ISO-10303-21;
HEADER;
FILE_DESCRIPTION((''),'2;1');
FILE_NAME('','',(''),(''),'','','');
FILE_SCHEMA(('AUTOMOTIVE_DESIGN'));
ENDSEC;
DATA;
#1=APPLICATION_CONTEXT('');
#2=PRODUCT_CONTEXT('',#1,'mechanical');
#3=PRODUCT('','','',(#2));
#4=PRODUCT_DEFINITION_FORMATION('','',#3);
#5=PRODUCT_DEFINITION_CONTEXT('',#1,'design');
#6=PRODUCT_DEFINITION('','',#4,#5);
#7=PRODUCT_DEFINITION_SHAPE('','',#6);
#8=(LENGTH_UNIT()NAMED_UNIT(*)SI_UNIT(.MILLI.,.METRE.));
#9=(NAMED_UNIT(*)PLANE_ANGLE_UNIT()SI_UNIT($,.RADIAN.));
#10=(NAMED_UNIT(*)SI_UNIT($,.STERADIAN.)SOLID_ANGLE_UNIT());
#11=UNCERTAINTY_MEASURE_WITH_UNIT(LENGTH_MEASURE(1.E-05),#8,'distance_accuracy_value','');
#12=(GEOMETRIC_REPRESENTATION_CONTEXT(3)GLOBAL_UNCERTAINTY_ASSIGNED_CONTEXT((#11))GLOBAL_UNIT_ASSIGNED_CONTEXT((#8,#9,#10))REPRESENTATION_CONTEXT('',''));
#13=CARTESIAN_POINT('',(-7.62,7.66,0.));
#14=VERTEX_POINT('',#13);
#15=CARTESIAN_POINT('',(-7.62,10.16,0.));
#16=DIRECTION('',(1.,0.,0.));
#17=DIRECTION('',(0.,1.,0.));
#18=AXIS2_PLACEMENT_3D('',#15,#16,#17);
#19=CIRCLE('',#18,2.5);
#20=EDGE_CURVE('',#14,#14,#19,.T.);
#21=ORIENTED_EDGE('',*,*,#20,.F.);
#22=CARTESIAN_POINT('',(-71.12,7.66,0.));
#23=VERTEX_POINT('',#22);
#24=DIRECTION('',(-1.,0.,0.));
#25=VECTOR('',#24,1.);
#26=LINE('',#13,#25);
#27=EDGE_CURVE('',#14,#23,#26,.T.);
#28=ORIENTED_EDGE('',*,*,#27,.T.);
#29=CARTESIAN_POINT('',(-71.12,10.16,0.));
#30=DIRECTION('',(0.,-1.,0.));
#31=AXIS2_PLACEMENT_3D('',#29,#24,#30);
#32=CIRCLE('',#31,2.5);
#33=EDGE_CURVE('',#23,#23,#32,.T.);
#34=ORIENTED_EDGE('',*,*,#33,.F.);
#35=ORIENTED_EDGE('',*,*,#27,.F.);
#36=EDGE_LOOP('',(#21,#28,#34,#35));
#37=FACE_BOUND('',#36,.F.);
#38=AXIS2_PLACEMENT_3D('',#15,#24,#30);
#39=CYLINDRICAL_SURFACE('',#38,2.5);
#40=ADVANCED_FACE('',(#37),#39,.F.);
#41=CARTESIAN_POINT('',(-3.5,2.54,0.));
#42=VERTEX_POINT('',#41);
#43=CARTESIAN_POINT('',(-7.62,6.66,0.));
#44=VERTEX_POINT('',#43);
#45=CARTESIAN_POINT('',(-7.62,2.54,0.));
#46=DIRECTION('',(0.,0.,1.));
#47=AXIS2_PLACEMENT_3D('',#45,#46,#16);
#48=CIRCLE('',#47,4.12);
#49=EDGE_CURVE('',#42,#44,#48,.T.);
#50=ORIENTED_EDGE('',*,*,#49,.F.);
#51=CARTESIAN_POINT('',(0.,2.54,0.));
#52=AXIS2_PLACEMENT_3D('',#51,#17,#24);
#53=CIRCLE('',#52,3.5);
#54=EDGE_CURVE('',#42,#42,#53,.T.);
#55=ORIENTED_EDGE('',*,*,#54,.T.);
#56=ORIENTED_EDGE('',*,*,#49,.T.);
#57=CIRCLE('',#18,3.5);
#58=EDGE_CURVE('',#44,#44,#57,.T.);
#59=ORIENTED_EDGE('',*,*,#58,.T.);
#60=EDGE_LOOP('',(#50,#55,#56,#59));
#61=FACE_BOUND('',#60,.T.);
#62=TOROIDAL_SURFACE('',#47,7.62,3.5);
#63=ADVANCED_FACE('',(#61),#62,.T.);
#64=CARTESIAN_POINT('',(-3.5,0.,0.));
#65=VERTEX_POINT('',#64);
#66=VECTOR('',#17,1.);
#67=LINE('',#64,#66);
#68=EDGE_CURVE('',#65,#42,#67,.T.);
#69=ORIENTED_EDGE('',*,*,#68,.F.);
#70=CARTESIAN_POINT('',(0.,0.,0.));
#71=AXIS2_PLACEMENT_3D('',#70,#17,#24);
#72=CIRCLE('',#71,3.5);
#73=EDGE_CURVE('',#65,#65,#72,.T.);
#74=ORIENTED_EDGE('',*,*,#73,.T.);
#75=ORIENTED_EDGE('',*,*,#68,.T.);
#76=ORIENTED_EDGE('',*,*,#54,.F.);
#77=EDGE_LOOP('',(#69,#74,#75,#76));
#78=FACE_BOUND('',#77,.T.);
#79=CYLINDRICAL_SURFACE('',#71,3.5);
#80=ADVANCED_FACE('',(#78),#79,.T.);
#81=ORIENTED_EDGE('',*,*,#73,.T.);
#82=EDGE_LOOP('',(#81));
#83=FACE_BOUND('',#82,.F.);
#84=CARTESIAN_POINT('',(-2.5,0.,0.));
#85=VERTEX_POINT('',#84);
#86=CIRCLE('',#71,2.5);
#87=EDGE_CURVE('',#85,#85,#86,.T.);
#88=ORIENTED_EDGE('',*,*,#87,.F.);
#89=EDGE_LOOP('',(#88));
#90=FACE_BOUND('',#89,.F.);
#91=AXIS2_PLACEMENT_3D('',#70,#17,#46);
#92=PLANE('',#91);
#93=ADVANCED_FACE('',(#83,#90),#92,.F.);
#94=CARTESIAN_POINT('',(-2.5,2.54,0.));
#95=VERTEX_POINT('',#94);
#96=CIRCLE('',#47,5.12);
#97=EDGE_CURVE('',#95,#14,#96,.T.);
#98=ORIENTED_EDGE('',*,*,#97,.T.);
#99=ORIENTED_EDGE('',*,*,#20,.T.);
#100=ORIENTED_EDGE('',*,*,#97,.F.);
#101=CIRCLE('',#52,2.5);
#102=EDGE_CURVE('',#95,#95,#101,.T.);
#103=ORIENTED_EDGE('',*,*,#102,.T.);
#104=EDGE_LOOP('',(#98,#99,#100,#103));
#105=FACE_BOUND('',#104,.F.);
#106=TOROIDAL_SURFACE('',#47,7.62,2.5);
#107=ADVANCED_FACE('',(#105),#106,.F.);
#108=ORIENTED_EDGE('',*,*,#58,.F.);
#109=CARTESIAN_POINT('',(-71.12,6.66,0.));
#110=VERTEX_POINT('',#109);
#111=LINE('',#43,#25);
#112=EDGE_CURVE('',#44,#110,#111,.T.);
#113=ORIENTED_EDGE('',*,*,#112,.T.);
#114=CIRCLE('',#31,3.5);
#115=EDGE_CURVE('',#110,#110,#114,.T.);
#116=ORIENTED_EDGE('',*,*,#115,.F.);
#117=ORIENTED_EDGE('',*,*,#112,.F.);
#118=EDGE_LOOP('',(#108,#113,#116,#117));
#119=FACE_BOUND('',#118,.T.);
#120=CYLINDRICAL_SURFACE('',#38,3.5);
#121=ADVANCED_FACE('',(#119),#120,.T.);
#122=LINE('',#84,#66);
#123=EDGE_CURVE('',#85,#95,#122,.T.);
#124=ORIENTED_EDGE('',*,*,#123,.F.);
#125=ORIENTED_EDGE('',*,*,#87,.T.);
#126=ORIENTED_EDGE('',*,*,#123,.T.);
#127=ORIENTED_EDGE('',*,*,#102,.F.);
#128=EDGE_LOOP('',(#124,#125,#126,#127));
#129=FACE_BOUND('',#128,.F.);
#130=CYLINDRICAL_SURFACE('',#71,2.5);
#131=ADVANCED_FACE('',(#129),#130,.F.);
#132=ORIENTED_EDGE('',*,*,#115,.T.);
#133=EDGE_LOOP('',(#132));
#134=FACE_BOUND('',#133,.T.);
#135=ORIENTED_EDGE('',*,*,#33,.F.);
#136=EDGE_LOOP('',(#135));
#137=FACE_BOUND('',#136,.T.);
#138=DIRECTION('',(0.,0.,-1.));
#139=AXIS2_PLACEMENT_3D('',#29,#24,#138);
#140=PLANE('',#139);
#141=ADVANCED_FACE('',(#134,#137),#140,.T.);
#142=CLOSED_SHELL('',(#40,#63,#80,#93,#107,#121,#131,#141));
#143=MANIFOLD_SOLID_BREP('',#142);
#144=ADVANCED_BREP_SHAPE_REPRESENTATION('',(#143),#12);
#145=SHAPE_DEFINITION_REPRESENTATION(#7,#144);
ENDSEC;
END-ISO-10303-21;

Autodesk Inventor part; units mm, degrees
ref_plane "YZ Plane" through (0, 0, 0) normal (1, 0, 0) x (0, 1, 0)
ref_plane "XZ Plane" through (0, 0, 0) normal (0, 1, 0) x (-1, 0, 0)
ref_plane "XY Plane" through (0, 0, 0) normal (0, 0, 1) x (1, 0, 0)
sketch "Sketch1" plane through (0, 0, 0) normal (0, 1, 0) x (-1, 0, 0)
  circle A0 centre (0, 0) radius 2.5
  circle A1 centre (0, 0) radius 3.5
  dimension "PenetrationUpstreamInnerDiameter" = 5
  dimension "PenetrationUpstreamThickness" = 1
sketch "Sketch2" plane through (0, 0, 0) normal (0, 0, 1) x (1, 0, 0)
  line L0 (-7.62, 10.16) -> (-71.12, 10.16)
  line L1 (0, 0) -> (0, 2.54)
  arc A0 (0, 2.54) -> (-7.62, 10.16) centre (-7.62, 2.54) ccw
  dimension "PenetrationUpstreamLength" = 63.5
  dimension "d14" = 90
  dimension "PenetrationUpstreamDistanceFromWallToCentre" = 10.16
  dimension "StraightBit" = 2.54
sweep "Sweep2" add profiles "Sketch1" path "Sketch2"
equation "\"StraightBit\" = 0.25 * PenetrationUpstreamDistanceFromWallToCentre"
properties part number "PenetrationUpstream"
